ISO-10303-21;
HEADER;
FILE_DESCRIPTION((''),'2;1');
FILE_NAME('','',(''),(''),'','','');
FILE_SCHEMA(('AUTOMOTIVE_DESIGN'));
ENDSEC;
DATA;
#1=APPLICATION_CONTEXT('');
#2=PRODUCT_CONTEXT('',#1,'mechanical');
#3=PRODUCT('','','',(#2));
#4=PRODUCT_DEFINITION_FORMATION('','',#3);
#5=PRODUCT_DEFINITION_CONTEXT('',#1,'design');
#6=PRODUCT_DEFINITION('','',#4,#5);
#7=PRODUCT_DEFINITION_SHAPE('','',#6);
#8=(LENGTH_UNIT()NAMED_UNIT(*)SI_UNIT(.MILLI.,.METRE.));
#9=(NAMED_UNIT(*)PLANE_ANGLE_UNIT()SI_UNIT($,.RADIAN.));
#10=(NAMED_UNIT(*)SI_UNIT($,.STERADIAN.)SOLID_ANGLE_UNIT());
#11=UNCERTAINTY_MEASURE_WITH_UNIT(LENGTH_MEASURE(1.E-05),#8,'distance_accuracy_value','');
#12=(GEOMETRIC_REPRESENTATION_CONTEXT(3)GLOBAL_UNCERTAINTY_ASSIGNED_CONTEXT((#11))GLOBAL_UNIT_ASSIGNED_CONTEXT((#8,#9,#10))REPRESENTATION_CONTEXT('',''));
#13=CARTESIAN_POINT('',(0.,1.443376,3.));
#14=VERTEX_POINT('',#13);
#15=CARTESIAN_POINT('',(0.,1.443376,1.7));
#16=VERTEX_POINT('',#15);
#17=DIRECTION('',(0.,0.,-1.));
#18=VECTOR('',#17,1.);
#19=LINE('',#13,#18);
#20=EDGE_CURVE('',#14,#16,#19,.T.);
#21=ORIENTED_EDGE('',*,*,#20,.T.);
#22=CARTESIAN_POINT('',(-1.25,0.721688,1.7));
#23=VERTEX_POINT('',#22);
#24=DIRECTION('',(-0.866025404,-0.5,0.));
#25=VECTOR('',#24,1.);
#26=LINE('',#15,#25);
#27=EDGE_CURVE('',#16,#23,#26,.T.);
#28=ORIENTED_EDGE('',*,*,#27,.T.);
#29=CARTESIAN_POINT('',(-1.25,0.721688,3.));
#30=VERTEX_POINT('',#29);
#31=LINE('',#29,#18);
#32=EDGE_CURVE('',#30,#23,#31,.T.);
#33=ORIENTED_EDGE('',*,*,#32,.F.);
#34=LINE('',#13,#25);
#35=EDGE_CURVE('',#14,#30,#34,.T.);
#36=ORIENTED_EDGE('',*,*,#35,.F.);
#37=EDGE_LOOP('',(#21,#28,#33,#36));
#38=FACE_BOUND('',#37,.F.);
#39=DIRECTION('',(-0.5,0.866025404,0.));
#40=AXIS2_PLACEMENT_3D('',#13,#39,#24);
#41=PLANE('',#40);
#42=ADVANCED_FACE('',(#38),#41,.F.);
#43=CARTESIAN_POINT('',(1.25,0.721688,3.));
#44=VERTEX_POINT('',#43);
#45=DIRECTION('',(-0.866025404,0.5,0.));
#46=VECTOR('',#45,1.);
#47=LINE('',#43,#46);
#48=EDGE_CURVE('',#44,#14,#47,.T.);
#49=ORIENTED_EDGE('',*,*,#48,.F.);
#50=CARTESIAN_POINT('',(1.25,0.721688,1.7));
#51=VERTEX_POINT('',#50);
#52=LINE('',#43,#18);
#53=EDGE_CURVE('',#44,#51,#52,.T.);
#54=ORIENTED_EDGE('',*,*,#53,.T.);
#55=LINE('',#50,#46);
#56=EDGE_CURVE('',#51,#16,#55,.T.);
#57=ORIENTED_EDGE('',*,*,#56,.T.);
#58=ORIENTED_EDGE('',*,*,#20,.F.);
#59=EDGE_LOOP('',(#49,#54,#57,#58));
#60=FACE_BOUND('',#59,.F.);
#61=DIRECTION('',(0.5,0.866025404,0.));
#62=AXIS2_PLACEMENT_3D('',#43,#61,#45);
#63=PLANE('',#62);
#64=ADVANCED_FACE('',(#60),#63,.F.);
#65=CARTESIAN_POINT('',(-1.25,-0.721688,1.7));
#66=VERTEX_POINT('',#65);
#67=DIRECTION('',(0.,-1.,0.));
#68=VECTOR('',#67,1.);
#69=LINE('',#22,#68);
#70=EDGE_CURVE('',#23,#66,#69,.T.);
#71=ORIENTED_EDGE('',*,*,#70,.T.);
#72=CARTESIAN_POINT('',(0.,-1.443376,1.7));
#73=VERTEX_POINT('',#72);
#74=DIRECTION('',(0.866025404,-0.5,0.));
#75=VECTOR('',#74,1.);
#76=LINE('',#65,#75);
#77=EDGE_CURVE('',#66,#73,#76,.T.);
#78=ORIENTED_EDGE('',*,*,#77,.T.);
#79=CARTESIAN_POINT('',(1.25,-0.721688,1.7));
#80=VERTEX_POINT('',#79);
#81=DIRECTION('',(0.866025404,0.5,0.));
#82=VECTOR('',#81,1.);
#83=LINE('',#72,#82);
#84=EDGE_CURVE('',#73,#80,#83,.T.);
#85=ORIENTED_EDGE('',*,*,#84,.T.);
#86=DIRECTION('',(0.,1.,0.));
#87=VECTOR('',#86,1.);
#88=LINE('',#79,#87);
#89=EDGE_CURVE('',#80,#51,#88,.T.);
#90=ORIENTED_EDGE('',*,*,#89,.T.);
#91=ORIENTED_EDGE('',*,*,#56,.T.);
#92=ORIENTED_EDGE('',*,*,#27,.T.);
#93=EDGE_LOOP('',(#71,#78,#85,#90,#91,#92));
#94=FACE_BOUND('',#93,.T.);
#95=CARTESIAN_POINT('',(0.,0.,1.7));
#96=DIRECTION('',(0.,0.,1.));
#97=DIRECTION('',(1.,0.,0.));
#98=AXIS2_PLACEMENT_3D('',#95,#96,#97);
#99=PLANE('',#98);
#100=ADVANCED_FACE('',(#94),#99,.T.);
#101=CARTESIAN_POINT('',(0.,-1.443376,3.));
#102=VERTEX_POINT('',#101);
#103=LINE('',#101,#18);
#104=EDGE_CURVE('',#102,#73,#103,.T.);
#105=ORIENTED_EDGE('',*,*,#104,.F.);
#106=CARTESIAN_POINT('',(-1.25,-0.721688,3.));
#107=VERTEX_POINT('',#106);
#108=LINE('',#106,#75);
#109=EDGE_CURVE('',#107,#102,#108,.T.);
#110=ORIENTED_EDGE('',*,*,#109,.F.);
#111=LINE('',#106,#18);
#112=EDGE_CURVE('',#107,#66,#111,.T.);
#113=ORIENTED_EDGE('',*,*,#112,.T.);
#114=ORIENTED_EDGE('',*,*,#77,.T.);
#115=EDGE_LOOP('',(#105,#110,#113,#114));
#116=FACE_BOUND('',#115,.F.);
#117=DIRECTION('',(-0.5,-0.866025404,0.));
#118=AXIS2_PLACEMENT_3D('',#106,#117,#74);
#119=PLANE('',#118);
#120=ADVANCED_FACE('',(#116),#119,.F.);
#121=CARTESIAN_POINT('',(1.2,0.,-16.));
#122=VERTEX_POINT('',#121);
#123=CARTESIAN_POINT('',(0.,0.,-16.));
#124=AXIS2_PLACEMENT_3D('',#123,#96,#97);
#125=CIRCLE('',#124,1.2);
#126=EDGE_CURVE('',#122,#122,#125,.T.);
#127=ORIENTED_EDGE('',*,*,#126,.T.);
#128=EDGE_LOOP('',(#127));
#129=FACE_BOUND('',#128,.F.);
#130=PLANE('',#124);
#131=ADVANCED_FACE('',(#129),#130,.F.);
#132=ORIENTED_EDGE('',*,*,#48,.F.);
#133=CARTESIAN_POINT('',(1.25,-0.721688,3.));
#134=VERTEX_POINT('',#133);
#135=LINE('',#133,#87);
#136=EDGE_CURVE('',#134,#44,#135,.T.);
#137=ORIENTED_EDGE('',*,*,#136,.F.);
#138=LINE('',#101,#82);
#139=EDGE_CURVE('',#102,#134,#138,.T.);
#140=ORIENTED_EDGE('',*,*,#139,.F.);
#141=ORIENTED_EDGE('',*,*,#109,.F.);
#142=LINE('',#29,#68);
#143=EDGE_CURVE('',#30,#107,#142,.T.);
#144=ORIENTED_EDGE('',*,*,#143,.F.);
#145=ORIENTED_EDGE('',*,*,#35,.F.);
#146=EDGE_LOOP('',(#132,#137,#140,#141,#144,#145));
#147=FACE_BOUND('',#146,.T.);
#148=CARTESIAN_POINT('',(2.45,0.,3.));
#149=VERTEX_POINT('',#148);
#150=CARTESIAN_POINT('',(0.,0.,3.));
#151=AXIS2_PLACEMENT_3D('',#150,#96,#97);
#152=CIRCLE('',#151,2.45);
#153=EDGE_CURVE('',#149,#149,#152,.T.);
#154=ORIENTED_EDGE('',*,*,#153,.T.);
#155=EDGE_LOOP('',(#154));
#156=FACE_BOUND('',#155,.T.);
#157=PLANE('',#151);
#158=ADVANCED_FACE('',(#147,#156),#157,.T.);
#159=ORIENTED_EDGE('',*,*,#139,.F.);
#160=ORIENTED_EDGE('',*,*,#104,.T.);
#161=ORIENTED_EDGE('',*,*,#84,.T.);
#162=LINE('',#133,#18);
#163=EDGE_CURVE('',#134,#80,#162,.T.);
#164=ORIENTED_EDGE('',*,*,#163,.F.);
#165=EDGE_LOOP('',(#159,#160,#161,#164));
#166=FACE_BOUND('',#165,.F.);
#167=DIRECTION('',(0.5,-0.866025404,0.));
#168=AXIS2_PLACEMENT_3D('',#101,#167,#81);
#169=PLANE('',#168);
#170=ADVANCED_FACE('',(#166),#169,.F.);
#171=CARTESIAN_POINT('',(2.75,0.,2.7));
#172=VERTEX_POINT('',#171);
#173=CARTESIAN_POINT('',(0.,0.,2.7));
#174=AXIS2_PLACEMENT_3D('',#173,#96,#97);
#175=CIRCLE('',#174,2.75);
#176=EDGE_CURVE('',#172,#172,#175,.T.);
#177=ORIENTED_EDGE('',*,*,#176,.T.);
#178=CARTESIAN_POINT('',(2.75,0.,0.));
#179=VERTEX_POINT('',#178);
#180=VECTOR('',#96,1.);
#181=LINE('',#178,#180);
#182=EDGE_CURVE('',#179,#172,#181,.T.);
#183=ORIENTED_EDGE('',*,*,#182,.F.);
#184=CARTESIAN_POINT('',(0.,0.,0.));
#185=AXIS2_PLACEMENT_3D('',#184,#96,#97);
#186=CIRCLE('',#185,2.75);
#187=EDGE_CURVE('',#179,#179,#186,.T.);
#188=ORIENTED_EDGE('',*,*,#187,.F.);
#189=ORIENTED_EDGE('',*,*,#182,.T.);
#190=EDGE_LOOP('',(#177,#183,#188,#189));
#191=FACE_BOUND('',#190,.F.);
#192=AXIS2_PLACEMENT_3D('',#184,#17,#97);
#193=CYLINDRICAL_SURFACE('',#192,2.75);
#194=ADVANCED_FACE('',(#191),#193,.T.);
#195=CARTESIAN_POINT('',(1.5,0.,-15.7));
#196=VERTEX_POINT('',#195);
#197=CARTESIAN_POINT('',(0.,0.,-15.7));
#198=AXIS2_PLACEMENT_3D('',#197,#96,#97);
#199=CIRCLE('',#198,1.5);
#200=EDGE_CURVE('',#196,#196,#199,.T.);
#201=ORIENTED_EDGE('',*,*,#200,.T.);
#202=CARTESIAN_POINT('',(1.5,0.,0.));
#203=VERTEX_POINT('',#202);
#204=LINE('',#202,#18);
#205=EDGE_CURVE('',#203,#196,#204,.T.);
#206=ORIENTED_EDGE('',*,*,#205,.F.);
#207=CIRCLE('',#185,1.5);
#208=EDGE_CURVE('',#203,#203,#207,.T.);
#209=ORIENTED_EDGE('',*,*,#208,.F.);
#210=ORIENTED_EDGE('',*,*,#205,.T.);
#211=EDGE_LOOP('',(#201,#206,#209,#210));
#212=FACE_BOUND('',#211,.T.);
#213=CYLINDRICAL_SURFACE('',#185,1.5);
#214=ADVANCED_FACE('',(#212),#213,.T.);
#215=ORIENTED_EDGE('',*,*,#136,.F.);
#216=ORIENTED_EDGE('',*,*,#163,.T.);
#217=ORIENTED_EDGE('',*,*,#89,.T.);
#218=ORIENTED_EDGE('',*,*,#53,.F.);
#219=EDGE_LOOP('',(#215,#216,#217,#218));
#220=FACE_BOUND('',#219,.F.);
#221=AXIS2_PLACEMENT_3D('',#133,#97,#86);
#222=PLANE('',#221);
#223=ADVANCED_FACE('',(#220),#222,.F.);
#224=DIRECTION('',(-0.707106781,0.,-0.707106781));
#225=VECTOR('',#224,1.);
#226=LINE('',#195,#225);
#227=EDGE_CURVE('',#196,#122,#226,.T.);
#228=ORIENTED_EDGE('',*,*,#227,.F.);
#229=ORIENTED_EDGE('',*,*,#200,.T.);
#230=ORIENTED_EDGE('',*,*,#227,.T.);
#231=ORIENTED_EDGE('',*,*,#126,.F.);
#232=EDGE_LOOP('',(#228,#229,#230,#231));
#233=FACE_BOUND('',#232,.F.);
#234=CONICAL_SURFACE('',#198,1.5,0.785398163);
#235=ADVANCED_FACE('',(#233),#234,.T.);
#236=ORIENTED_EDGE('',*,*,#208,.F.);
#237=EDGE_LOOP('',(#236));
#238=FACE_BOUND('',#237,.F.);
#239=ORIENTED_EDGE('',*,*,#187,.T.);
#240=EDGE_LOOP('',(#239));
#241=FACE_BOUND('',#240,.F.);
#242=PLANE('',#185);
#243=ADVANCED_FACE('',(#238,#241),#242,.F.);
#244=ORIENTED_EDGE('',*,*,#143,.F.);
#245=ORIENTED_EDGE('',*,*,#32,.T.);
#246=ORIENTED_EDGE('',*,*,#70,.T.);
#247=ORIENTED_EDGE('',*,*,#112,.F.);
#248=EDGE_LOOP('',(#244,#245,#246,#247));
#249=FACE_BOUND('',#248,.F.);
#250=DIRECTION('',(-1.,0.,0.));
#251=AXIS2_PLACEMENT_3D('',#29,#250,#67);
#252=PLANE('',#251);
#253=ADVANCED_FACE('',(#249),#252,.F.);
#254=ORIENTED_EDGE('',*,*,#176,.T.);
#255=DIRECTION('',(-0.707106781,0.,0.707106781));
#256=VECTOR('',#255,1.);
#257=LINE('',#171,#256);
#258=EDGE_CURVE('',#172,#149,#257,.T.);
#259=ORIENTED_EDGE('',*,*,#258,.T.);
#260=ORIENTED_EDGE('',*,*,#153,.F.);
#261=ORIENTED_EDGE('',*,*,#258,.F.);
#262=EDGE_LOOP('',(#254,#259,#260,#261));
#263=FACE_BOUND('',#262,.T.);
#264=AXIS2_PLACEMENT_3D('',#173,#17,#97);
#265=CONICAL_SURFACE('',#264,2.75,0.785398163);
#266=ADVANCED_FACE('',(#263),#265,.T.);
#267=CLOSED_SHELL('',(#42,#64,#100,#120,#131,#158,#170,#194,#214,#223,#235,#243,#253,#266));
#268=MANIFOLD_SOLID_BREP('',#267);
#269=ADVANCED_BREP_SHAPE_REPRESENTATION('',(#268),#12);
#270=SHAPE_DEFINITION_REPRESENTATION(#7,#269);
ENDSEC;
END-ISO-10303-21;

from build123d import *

# Parameters (mm, degrees)
F2_R      = 1.5
F3_DEPTH  = 16
F2_R_2    = 2.75
F3_FACE_R = 1.5
F4_DEPTH  = 3
F5_SIZE   = 0.3
F7_DEPTH  = 1.3


with BuildPart() as f3:
    # F2 (on Top) → F3 (new body)
    with BuildSketch(Plane.XY):
        Circle(F2_R)
    extrude(amount=-F3_DEPTH)

    # F2 (on Top) + F3_face (on face) → F4 (join)
    with BuildSketch(Plane.XY):
        Circle(F2_R_2)
        Circle(F2_R, mode=Mode.SUBTRACT)
    with BuildSketch(Plane.XY):
        Circle(F3_FACE_R)
    extrude(amount=F4_DEPTH)

    # F5
    f5_edges = [f3.edges().sort_by_distance(p)[0] for p in [
        (-1.5, 0, -16),
        (-2.75, 0, 3),
    ]]
    chamfer(f5_edges, length=F5_SIZE)

    # F6 (on face) → F7 (cut)
    with BuildSketch(Plane.XY.offset(3)):
        Polygon((1.25, -0.7216878365), (1.25, 0.7216878365), (0, 1.443375673), (-1.25, 0.7216878365), (-1.25, -0.7216878365), (0, -1.443375673), align=None)
    extrude(amount=-F7_DEPTH, mode=Mode.SUBTRACT)


solid = f3.part
